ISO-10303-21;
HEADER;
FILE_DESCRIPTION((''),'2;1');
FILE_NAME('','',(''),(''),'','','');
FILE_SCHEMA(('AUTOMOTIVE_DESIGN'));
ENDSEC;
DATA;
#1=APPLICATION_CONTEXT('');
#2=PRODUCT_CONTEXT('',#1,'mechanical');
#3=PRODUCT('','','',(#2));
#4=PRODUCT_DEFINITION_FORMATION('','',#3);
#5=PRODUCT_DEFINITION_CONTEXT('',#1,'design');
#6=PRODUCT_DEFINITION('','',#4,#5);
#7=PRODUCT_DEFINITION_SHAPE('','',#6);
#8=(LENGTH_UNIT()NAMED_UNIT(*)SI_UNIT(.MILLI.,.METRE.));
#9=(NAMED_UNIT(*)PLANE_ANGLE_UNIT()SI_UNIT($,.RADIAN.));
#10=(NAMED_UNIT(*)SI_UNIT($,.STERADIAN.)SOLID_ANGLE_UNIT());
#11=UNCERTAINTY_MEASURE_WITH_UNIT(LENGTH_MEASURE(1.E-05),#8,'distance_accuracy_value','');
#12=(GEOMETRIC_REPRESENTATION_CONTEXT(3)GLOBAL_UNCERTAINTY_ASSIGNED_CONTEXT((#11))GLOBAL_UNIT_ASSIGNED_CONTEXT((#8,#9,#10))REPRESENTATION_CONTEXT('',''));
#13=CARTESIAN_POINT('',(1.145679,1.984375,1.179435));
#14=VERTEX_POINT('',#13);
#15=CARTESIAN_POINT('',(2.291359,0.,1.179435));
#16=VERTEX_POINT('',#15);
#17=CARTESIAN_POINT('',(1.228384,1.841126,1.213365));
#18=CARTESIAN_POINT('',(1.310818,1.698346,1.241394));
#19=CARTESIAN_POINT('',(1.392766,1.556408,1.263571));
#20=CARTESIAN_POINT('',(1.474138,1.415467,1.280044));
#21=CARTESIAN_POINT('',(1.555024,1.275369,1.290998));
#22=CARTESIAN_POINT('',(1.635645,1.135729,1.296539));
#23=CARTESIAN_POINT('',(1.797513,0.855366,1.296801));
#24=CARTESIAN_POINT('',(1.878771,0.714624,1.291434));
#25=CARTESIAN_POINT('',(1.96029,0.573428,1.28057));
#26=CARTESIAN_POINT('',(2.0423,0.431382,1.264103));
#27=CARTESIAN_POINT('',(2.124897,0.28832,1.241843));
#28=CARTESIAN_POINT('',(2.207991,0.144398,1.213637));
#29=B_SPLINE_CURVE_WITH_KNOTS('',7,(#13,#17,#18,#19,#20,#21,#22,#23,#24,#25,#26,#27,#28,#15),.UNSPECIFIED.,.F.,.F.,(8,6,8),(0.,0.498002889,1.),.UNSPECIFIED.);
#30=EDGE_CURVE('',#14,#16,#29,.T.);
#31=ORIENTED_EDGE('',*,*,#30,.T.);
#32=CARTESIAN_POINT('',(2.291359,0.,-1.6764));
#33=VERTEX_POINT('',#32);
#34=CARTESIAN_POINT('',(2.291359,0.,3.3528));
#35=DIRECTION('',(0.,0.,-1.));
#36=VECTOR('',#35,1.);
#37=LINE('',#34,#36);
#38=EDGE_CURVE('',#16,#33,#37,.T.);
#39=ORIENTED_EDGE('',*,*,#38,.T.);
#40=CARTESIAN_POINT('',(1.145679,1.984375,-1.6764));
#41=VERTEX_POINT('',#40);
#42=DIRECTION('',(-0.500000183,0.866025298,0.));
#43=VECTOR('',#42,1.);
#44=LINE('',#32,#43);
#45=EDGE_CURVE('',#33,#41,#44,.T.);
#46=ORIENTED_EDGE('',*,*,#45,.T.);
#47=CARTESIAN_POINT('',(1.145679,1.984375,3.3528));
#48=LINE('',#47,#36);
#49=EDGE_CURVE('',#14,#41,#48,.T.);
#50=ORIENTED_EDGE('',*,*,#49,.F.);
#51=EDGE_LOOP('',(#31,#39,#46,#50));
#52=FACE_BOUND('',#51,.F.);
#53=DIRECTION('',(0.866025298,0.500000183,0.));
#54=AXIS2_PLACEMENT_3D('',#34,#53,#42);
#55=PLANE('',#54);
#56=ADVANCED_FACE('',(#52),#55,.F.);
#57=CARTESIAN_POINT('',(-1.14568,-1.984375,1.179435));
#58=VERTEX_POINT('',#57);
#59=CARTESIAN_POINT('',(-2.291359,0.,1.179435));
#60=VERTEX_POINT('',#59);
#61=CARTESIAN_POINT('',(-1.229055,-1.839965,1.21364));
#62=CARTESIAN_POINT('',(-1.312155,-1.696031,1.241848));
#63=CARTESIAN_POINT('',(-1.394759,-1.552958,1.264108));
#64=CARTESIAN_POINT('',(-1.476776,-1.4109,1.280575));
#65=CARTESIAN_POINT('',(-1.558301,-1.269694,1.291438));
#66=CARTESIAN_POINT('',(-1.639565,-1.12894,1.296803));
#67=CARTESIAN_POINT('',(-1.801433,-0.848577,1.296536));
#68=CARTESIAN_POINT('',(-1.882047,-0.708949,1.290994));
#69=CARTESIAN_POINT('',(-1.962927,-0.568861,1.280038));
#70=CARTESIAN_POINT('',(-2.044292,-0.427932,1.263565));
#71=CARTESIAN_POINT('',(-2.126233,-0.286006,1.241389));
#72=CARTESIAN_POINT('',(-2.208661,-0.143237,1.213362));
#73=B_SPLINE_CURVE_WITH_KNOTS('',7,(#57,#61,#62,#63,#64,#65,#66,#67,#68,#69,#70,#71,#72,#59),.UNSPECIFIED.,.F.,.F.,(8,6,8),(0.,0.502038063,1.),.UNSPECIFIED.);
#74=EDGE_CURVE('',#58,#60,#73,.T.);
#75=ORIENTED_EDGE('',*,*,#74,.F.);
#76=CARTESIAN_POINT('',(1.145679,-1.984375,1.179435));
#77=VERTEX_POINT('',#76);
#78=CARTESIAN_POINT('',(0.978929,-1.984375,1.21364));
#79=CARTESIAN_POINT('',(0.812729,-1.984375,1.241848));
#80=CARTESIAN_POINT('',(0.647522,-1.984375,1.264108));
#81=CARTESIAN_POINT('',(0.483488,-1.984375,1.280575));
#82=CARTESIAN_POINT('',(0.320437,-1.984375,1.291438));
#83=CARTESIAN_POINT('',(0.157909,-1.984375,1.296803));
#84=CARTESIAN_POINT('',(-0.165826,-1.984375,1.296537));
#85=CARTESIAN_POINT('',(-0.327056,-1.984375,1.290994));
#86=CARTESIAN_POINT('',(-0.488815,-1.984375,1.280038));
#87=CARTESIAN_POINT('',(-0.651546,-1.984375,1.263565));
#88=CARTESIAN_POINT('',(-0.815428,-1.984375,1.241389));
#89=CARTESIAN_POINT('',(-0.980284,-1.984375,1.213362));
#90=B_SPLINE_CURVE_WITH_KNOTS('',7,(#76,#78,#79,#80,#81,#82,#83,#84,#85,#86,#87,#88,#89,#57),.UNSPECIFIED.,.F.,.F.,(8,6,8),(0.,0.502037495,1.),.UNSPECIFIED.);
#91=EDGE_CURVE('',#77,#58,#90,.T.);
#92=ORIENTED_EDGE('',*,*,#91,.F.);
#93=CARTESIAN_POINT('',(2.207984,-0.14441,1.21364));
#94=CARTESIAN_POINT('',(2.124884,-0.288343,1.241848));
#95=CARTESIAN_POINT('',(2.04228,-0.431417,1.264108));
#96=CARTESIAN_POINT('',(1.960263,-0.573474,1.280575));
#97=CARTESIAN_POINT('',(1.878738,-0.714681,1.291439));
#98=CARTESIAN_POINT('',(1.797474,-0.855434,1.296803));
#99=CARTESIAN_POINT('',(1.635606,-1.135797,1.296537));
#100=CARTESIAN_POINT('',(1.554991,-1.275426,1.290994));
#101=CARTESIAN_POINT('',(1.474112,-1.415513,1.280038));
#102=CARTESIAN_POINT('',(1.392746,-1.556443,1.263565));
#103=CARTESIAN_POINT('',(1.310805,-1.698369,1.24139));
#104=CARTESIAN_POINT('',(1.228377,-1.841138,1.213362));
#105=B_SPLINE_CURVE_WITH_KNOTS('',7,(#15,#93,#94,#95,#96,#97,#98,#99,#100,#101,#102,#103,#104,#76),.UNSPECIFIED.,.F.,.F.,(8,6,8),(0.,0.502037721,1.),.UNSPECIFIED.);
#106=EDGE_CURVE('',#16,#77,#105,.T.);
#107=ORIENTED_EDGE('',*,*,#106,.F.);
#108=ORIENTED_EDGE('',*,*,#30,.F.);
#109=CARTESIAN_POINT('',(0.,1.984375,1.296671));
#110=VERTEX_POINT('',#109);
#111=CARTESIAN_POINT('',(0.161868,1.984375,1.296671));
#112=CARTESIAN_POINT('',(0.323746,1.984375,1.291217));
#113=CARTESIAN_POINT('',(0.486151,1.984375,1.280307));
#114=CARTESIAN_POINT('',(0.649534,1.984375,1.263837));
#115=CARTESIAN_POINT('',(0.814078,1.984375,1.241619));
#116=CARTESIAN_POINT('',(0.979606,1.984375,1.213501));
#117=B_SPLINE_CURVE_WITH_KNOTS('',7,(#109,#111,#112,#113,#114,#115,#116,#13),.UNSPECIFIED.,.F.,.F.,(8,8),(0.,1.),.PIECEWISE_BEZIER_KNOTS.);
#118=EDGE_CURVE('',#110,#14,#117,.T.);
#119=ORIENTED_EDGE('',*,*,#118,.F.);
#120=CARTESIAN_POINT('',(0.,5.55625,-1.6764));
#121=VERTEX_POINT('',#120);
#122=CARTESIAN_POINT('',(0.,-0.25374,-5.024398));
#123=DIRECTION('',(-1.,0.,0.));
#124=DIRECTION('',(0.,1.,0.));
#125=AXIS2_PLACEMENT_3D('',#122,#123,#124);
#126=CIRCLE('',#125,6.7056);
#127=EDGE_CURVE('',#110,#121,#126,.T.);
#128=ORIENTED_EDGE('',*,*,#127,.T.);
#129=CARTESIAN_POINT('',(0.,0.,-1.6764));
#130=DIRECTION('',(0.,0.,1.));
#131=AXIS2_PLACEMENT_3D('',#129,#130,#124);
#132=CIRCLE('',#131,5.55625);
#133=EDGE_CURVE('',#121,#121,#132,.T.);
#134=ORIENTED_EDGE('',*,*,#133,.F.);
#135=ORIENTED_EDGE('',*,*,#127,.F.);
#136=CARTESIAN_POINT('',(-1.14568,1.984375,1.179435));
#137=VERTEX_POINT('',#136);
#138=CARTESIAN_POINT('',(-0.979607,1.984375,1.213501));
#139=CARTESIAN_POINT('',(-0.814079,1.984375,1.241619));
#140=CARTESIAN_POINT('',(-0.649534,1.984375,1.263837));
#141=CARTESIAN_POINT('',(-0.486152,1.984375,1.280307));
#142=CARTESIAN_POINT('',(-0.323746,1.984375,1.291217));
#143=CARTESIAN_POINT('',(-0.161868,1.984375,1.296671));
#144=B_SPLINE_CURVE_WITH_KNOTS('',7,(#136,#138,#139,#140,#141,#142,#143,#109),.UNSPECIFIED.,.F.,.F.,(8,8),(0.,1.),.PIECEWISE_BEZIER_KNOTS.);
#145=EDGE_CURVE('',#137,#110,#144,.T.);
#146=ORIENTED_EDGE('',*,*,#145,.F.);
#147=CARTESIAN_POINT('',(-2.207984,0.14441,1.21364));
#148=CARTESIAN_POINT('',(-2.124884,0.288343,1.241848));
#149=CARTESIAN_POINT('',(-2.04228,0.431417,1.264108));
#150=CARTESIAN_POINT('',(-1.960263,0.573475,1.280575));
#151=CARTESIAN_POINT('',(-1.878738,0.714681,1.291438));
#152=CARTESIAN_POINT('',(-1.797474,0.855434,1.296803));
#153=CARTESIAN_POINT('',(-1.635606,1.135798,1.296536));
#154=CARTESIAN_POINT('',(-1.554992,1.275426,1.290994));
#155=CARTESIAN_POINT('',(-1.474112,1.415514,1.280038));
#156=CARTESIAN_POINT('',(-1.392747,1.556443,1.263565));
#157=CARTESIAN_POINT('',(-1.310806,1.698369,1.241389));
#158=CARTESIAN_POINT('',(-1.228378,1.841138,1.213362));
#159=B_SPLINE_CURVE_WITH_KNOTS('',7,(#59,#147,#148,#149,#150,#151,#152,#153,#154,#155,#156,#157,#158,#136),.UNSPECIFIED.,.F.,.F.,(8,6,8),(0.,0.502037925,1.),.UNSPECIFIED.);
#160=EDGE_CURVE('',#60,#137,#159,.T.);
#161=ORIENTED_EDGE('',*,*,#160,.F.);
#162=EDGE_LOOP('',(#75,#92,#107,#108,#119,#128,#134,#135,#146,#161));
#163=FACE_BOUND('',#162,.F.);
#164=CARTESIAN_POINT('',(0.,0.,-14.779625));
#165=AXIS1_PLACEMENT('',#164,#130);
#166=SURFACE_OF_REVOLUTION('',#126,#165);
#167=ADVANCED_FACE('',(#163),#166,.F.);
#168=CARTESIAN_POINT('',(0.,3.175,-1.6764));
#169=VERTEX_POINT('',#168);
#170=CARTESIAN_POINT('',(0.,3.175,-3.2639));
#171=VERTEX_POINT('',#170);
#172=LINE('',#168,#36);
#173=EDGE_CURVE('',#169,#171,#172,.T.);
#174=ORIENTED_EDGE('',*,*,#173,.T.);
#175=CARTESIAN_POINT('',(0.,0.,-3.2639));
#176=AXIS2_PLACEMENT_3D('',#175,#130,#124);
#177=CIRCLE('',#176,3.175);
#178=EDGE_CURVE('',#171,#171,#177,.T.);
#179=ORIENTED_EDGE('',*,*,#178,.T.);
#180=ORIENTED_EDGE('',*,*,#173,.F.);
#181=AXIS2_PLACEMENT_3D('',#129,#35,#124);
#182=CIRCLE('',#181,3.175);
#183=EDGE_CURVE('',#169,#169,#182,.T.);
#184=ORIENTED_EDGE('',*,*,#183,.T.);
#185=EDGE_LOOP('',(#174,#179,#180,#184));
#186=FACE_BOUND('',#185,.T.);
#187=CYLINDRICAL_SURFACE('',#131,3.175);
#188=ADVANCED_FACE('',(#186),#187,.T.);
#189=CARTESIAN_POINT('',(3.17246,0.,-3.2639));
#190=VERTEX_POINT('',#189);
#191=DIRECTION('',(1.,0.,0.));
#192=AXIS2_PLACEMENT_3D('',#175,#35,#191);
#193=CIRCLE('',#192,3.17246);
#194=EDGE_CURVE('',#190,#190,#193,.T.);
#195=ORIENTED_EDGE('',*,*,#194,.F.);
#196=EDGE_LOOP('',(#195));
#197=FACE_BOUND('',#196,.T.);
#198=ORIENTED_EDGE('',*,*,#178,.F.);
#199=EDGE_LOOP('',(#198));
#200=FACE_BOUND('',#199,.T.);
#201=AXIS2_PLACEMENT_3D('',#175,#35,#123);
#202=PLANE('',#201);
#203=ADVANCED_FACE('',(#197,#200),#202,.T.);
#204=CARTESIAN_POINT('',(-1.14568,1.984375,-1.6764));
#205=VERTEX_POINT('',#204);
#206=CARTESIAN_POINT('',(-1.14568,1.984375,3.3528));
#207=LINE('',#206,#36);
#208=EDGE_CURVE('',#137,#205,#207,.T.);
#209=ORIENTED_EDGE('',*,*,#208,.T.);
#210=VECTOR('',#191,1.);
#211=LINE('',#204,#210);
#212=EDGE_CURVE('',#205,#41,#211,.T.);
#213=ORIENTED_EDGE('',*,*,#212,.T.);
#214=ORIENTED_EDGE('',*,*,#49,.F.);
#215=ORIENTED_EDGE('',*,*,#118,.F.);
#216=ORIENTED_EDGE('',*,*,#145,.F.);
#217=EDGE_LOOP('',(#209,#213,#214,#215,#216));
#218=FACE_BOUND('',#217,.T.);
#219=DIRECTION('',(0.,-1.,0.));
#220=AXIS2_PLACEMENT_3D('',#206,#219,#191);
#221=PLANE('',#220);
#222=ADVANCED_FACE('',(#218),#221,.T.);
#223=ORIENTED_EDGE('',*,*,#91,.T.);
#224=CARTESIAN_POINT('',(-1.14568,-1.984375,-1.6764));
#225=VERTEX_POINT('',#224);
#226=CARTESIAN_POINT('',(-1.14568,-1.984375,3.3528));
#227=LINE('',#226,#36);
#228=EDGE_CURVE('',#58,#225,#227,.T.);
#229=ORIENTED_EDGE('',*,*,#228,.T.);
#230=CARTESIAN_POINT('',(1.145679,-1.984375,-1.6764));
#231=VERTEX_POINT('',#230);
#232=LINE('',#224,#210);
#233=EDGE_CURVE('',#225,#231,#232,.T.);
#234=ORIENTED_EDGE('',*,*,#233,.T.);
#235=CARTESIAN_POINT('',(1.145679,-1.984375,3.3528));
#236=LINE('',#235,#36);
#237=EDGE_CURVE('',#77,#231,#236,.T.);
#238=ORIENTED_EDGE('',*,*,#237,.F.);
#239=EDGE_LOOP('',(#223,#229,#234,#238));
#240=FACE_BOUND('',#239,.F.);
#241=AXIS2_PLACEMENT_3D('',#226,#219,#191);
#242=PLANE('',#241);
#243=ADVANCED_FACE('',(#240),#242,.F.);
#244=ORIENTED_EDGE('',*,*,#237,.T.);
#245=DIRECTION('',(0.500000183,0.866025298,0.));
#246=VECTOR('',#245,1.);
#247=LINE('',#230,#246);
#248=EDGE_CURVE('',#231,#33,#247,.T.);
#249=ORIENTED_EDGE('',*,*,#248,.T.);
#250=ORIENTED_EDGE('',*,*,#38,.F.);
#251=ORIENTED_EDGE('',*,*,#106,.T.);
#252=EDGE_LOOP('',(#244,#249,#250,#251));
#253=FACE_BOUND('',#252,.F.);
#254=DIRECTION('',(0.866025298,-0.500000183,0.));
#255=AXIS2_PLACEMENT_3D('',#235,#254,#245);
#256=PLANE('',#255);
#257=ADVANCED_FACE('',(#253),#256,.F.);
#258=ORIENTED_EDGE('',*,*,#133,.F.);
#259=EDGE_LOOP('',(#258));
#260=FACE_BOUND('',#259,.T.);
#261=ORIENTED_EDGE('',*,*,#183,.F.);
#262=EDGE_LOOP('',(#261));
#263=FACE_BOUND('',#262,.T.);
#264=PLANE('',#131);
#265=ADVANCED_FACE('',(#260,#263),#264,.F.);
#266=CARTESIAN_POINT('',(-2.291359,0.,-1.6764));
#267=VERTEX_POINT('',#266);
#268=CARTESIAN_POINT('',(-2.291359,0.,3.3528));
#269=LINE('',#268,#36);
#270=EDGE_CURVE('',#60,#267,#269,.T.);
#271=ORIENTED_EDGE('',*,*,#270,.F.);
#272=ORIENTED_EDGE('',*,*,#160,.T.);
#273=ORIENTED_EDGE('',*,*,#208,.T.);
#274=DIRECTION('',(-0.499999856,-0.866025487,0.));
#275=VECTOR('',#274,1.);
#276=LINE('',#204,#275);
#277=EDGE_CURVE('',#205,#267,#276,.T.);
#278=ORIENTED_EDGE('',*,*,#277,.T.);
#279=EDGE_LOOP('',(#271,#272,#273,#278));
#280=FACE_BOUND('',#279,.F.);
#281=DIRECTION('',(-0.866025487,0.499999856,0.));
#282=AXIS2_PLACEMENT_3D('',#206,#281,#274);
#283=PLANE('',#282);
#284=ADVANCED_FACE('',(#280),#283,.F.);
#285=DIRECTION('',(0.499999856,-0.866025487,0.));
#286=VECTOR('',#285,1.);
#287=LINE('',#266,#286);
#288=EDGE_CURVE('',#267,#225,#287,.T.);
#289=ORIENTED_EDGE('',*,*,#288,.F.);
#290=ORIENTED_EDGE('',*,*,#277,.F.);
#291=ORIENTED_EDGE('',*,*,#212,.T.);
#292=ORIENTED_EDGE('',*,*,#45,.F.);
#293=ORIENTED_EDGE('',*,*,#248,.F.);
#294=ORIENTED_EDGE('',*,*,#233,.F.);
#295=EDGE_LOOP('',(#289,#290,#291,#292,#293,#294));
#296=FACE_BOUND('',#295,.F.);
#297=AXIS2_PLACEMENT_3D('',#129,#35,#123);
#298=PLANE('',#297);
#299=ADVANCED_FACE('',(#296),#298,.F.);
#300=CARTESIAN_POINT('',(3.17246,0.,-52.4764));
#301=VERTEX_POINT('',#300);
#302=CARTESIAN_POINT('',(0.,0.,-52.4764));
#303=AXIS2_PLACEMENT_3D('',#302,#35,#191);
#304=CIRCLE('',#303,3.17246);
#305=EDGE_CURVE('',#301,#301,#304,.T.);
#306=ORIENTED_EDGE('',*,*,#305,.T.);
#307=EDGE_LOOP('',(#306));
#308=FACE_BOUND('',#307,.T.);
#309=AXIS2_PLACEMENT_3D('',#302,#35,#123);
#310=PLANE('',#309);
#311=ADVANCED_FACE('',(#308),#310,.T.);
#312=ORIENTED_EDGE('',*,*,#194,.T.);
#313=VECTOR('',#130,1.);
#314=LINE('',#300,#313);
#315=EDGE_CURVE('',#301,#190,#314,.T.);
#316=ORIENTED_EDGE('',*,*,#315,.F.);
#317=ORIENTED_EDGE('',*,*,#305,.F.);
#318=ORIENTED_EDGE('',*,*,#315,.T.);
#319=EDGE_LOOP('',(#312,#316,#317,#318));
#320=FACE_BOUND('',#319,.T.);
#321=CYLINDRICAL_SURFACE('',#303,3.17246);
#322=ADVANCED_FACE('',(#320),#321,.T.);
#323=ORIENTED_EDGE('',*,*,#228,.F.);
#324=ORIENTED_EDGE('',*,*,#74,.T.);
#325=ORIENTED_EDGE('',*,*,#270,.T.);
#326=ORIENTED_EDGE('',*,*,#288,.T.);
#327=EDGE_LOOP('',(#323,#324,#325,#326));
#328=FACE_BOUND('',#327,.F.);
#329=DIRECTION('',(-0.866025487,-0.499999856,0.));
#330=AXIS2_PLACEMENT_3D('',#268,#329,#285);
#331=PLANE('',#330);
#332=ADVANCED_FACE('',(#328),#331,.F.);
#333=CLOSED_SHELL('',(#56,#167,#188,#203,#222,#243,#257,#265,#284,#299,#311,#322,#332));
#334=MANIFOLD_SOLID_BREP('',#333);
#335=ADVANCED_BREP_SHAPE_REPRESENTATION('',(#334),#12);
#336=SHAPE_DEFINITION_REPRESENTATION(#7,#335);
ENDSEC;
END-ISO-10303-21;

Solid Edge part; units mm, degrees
sketch "Sketch1" plane through (0, 0, 0) normal (1, 0, 0) x (0, 1, 0)
  line L0 (0, -1.6764) -> (0, 1.6764)
  arc A0 (0, 1.6764) -> (5.55625, -1.6764) centre (-0.25374, -5.024398) cw
  line L1 (0, -1.6764) -> (5.55625, -1.6764)
  dimension "D1" = 3.3528
  dimension "D2" = 6.7056
revolve "RevolvedProtrusion1" add sketch "Sketch1" angle 360 about axis through (0, 0, -14.779625) along (0, 0, 1)
sketch "Sketch2" plane through (0, 0, -1.6764) normal (0, 0, -1) x (0, 1, 0)
  circle A0 centre (0, 0) radius 3.175
  dimension "D1" = 6.35
extrude "Protrusion1" add sketch "Sketch2" along normal blind 50.8
sketch "Sketch3" plane through (0, 0, -52.4764) normal (0, 0, -1) x (1, 0, 0)
  circle A0 centre (0, 0) radius 3.17246
  dimension "D1" = 0.0025
extrude "Cutout1" cut sketch "Sketch3" against normal blind 49.2125 flip side to cut
sketch "Sketch4" plane through (-0.603226, 0.360624, 3.3528) normal (0, 0, 1) x (1, 0, 0)
  line L0 (-0.542454, 1.623751) -> (1.748905, 1.623751)
  line L1 (2.894585, -0.360624) -> (1.748905, 1.623751)
  line L2 (1.748905, -2.344999) -> (2.894585, -0.360624)
  line L3 (-0.542454, -2.344999) -> (1.748905, -2.344999)
  line L4 (-1.688133, -0.360624) -> (-0.542454, -2.344999)
  line L5 (-0.542454, 1.623751) -> (-1.688133, -0.360624)
extrude "ExtrudedCutout_11" cut sketch "Sketch4" against normal blind 5.0292
properties part number "24100156"
